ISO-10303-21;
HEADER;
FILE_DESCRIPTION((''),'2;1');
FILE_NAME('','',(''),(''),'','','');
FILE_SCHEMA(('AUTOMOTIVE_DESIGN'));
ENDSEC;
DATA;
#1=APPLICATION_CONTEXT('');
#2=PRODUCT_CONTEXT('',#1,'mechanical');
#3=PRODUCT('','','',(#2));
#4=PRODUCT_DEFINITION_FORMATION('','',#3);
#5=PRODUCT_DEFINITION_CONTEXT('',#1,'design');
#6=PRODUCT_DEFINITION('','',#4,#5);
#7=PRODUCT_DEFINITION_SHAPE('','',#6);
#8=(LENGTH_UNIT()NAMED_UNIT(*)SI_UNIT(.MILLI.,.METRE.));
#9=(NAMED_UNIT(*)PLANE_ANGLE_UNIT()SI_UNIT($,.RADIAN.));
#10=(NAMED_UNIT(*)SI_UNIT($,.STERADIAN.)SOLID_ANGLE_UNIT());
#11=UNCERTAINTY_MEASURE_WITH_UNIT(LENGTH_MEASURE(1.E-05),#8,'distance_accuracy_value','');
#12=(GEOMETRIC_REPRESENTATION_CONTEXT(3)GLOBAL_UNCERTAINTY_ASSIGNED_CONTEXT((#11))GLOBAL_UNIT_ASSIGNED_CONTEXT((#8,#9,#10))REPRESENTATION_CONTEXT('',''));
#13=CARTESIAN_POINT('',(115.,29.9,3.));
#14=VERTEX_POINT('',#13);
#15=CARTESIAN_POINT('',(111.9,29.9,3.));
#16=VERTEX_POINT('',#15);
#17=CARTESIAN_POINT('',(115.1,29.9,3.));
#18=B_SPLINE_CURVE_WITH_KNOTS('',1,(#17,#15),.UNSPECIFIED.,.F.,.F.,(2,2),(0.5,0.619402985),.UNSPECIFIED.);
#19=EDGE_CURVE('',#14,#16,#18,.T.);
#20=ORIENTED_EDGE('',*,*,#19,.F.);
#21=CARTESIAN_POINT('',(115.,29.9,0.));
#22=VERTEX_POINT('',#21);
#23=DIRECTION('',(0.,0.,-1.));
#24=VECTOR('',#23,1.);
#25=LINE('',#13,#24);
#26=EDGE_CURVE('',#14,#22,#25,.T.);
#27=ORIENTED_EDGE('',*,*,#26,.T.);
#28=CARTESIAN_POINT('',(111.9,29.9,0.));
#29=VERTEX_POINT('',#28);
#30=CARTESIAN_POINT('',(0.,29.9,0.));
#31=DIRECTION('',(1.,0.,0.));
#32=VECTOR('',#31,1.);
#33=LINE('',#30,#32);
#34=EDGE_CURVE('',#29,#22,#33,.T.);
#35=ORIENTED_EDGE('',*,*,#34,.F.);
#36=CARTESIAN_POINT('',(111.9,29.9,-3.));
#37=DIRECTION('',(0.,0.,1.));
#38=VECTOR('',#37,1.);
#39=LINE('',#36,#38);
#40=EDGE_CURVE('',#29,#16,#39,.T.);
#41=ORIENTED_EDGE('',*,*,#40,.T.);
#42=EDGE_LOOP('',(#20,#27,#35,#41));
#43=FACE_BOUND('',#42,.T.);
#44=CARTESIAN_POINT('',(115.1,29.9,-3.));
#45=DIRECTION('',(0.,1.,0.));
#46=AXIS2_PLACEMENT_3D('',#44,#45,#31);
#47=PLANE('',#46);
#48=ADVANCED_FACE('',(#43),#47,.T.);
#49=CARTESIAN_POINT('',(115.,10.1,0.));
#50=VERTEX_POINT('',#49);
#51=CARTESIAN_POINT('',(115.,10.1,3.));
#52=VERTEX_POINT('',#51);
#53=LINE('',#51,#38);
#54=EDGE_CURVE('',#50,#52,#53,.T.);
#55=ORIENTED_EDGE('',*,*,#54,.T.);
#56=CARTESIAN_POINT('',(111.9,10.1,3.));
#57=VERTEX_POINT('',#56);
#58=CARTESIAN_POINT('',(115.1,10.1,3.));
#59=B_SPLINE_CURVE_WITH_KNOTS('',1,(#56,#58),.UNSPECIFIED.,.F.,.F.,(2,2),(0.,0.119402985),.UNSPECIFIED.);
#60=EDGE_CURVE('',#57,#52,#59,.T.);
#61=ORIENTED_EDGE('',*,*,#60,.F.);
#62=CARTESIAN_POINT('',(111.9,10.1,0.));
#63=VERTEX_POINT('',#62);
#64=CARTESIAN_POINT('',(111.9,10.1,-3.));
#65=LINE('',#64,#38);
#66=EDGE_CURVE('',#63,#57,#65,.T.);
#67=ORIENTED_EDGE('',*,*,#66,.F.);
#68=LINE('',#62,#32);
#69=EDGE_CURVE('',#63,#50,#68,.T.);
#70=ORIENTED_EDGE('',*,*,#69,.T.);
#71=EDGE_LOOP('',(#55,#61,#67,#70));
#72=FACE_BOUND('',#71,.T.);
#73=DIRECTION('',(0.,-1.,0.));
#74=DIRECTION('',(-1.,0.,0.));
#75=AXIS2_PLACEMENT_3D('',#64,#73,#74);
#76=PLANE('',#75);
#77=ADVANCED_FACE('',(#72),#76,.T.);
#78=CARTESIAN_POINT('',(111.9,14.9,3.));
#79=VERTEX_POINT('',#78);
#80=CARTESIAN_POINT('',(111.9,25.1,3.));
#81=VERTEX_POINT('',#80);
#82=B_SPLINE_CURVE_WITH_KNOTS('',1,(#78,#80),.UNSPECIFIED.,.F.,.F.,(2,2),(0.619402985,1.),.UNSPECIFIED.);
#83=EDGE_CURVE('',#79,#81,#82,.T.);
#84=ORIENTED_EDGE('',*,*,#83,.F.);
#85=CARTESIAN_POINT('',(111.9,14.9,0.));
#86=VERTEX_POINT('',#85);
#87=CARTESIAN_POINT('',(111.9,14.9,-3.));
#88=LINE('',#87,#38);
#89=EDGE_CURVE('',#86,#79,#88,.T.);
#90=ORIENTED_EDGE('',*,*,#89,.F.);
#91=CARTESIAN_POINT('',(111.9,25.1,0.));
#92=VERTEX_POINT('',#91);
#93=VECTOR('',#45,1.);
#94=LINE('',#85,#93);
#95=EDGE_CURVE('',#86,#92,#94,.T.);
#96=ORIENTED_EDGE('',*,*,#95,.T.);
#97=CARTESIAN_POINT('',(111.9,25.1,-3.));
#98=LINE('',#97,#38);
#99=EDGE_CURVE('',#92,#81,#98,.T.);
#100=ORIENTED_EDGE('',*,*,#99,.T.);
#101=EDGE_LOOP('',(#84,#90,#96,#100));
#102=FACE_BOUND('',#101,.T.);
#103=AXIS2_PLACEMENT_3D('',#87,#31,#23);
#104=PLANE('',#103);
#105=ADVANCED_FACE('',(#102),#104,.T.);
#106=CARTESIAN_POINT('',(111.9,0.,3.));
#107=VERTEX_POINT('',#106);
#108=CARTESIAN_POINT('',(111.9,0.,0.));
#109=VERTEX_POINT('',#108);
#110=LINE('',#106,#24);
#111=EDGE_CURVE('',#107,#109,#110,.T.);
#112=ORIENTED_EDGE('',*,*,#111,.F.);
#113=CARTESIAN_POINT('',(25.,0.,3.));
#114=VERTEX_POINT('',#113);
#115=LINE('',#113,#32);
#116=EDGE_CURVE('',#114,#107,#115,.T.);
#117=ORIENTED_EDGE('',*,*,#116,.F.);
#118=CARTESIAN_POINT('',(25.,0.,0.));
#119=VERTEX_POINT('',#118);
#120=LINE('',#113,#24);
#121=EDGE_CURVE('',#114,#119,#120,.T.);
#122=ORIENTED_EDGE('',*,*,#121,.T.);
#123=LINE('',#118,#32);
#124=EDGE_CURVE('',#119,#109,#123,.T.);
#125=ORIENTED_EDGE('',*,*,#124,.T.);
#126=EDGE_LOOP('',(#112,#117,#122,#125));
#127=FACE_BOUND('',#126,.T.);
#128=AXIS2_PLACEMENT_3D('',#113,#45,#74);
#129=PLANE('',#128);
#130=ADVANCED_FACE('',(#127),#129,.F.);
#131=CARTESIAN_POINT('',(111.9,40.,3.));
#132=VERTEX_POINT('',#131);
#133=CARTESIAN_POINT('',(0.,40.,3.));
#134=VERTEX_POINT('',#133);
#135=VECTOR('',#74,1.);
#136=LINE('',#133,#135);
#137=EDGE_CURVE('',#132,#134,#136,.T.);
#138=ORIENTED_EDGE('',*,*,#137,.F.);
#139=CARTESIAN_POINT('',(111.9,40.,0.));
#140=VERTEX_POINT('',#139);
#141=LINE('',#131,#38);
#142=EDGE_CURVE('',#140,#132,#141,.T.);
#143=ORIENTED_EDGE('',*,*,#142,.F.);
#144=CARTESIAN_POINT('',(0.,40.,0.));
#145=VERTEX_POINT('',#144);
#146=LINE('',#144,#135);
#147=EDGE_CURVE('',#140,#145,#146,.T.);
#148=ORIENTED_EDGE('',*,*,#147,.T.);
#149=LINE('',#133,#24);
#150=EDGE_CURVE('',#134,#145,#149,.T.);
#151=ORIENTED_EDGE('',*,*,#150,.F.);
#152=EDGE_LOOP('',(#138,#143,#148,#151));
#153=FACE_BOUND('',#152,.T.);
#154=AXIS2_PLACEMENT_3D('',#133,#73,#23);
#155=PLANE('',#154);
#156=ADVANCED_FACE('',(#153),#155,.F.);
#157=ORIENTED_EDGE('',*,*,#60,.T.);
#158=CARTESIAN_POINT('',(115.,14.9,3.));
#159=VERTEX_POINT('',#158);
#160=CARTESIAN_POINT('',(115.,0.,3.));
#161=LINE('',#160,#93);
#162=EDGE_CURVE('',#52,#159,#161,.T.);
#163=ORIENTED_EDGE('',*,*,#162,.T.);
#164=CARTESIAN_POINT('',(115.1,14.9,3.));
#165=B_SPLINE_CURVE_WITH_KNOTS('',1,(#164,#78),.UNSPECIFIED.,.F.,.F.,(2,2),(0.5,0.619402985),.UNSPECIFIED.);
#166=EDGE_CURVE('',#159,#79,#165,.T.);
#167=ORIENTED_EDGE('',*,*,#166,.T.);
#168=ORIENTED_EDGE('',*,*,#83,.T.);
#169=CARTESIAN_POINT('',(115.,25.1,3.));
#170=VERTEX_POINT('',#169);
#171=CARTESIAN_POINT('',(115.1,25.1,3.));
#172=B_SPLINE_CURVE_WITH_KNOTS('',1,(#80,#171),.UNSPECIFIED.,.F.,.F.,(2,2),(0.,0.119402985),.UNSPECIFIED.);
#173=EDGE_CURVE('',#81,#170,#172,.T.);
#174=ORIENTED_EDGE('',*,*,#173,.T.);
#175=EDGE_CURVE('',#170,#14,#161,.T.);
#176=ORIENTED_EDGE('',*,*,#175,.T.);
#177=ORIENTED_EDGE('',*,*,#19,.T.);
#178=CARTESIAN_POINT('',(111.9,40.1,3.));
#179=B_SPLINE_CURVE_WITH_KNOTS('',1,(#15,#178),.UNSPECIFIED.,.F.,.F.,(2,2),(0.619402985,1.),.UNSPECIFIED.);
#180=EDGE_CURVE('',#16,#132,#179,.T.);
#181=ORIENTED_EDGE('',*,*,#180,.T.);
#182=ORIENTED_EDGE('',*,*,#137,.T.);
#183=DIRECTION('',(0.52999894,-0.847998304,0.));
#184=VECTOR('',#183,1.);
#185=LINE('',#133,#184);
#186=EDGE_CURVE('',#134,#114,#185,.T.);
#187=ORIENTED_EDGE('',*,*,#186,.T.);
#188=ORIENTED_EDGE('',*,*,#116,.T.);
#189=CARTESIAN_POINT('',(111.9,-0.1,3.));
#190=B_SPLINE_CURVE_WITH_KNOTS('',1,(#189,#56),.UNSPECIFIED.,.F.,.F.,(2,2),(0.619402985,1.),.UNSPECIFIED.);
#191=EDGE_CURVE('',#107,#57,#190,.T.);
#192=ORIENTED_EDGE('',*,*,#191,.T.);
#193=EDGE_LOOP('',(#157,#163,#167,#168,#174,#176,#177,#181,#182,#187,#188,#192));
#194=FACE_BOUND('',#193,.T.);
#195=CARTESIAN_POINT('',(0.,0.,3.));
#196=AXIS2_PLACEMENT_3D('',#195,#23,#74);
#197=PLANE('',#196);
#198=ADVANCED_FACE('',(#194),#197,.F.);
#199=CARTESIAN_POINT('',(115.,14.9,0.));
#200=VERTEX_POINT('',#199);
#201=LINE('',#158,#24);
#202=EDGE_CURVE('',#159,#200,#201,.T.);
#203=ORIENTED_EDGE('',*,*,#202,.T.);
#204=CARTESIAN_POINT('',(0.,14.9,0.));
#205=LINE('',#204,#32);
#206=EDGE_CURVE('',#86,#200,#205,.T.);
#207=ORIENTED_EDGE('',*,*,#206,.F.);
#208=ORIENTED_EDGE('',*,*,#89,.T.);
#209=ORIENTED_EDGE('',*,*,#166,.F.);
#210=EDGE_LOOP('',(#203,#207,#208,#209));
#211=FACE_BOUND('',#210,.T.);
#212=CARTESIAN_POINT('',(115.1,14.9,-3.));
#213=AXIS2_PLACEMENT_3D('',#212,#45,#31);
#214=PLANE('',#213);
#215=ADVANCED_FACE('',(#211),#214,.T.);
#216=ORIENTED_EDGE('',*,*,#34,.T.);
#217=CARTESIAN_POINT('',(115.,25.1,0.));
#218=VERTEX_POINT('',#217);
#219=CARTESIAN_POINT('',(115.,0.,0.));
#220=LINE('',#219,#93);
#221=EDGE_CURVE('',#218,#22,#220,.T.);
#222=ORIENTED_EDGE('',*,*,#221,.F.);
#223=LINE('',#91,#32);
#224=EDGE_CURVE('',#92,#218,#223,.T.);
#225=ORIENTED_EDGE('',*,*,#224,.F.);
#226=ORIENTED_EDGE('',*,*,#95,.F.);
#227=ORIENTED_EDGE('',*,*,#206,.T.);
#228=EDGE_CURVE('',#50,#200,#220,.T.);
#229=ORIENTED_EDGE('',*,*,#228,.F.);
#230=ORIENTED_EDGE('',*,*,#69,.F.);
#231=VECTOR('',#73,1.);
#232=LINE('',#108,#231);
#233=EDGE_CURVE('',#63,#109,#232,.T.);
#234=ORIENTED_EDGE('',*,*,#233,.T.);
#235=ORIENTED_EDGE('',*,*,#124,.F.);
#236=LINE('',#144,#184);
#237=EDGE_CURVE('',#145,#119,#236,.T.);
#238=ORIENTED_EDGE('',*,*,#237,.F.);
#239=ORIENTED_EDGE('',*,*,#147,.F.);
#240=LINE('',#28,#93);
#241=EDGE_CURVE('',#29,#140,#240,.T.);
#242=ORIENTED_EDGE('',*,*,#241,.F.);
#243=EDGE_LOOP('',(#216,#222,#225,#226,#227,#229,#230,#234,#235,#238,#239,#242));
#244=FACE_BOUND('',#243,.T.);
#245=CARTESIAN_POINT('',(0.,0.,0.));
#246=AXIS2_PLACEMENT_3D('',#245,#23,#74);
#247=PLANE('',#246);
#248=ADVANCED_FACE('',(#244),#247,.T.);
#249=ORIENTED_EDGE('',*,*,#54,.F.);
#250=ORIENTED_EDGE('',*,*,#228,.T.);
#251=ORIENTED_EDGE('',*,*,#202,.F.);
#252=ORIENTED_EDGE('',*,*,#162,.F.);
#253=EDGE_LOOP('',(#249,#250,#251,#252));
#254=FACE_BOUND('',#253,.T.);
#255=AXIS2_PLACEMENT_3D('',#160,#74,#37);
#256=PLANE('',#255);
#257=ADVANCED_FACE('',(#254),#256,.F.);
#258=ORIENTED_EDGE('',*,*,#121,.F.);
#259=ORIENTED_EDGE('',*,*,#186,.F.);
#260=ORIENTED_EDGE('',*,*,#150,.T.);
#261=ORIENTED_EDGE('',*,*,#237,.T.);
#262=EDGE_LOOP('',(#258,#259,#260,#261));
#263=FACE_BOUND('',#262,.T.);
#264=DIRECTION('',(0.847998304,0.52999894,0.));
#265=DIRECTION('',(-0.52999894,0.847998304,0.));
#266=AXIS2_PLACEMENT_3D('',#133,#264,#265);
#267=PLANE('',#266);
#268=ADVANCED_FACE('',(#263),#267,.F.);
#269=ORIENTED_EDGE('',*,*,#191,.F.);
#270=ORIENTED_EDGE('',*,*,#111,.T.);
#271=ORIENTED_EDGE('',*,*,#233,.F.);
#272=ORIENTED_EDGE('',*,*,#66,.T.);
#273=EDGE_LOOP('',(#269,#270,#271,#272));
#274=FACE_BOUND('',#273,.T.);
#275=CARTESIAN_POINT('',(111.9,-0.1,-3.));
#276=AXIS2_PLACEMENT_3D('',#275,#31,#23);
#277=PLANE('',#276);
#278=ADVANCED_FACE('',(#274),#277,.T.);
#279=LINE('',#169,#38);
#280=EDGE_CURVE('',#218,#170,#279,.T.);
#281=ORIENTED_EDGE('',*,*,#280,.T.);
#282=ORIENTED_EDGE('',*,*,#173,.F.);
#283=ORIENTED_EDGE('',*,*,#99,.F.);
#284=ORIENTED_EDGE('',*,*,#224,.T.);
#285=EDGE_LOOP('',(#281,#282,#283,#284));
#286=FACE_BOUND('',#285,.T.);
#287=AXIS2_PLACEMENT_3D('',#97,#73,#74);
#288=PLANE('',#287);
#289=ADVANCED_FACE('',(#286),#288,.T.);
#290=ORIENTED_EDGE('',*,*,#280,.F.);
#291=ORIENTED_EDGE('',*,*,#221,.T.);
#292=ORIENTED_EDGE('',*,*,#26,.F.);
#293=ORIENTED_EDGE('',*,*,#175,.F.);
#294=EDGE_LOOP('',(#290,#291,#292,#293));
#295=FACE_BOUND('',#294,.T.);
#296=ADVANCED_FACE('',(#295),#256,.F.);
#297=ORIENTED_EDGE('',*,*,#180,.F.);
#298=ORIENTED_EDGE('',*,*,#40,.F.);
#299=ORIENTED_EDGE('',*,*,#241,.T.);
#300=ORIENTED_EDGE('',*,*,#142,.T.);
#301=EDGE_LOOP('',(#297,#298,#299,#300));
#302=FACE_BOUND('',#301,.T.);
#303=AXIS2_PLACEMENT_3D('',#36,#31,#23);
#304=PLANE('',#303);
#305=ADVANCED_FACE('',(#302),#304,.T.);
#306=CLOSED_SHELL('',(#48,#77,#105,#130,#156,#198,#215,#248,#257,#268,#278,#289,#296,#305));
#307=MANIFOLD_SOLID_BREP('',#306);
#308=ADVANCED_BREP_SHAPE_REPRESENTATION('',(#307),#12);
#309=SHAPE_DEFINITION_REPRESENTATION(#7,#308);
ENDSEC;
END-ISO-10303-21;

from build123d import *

# Parameters (mm, degrees)
T_LE_DE_BASE_PLI_E1_DEPTH              = 3
TENON_START                            = 14.9
TENON_ET_MORTAISE_RAINURE1_OUTLINE_W   = 3.1
TENON_ET_MORTAISE_RAINURE1_OUTLINE_H   = 3
TENON_ET_MORTAISE_RAINURE1_DEPTH       = 10.2
TENON_ET_MORTAISE_RAINURE1_2_OUTLINE_W = 3.1
TENON_ET_MORTAISE_RAINURE1_2_OUTLINE_H = 3
TENON_ET_MORTAISE_RAINURE1_2_DEPTH     = 10.1
TENON_START_2                          = 29.9
TENON_ET_MORTAISE_RAINURE1_3_OUTLINE_W = 3.1
TENON_ET_MORTAISE_RAINURE1_3_OUTLINE_H = 3
TENON_ET_MORTAISE_RAINURE1_3_DEPTH     = 10.1


# Read off the part's stored shape, not the designer's step: Tenon et mortaise-Rainure1
# Sheet-metal steps are written as plain solids
with BuildPart() as part:
    # Esquisse1 → Tôle de base pliée1 (new body)
    with BuildSketch(Plane.XY):
        Polygon((25, 0), (115, 0), (115, 40), (0, 40), align=None)
    extrude(amount=T_LE_DE_BASE_PLI_E1_DEPTH)

    # Tenon et mortaise-Rainure1 outline → Tenon et mortaise-Rainure1 (cut)
    with BuildSketch(Plane(origin=(0, 0, 0), x_dir=(1, 0, 0), z_dir=(0, 1, 0)).offset(TENON_START)):
        with Locations((113.45, -1.5)):
            Rectangle(TENON_ET_MORTAISE_RAINURE1_OUTLINE_W, TENON_ET_MORTAISE_RAINURE1_OUTLINE_H)
    extrude(amount=TENON_ET_MORTAISE_RAINURE1_DEPTH, mode=Mode.SUBTRACT)

    # Tenon et mortaise-Rainure1 2 outline → Tenon et mortaise-Rainure1 2 (cut)
    with BuildSketch(Plane(origin=(0, 0, 0), x_dir=(1, 0, 0), z_dir=(0, 1, 0))):
        with Locations((113.45, -1.5)):
            Rectangle(TENON_ET_MORTAISE_RAINURE1_2_OUTLINE_W, TENON_ET_MORTAISE_RAINURE1_2_OUTLINE_H)
    extrude(amount=TENON_ET_MORTAISE_RAINURE1_2_DEPTH, mode=Mode.SUBTRACT)

    # Tenon et mortaise-Rainure1 3 outline → Tenon et mortaise-Rainure1 3 (cut)
    with BuildSketch(Plane(origin=(0, 0, 0), x_dir=(1, 0, 0), z_dir=(0, 1, 0)).offset(TENON_START_2)):
        with Locations((113.45, -1.5)):
            Rectangle(TENON_ET_MORTAISE_RAINURE1_3_OUTLINE_W, TENON_ET_MORTAISE_RAINURE1_3_OUTLINE_H)
    extrude(amount=TENON_ET_MORTAISE_RAINURE1_3_DEPTH, mode=Mode.SUBTRACT)


solid = part.part
